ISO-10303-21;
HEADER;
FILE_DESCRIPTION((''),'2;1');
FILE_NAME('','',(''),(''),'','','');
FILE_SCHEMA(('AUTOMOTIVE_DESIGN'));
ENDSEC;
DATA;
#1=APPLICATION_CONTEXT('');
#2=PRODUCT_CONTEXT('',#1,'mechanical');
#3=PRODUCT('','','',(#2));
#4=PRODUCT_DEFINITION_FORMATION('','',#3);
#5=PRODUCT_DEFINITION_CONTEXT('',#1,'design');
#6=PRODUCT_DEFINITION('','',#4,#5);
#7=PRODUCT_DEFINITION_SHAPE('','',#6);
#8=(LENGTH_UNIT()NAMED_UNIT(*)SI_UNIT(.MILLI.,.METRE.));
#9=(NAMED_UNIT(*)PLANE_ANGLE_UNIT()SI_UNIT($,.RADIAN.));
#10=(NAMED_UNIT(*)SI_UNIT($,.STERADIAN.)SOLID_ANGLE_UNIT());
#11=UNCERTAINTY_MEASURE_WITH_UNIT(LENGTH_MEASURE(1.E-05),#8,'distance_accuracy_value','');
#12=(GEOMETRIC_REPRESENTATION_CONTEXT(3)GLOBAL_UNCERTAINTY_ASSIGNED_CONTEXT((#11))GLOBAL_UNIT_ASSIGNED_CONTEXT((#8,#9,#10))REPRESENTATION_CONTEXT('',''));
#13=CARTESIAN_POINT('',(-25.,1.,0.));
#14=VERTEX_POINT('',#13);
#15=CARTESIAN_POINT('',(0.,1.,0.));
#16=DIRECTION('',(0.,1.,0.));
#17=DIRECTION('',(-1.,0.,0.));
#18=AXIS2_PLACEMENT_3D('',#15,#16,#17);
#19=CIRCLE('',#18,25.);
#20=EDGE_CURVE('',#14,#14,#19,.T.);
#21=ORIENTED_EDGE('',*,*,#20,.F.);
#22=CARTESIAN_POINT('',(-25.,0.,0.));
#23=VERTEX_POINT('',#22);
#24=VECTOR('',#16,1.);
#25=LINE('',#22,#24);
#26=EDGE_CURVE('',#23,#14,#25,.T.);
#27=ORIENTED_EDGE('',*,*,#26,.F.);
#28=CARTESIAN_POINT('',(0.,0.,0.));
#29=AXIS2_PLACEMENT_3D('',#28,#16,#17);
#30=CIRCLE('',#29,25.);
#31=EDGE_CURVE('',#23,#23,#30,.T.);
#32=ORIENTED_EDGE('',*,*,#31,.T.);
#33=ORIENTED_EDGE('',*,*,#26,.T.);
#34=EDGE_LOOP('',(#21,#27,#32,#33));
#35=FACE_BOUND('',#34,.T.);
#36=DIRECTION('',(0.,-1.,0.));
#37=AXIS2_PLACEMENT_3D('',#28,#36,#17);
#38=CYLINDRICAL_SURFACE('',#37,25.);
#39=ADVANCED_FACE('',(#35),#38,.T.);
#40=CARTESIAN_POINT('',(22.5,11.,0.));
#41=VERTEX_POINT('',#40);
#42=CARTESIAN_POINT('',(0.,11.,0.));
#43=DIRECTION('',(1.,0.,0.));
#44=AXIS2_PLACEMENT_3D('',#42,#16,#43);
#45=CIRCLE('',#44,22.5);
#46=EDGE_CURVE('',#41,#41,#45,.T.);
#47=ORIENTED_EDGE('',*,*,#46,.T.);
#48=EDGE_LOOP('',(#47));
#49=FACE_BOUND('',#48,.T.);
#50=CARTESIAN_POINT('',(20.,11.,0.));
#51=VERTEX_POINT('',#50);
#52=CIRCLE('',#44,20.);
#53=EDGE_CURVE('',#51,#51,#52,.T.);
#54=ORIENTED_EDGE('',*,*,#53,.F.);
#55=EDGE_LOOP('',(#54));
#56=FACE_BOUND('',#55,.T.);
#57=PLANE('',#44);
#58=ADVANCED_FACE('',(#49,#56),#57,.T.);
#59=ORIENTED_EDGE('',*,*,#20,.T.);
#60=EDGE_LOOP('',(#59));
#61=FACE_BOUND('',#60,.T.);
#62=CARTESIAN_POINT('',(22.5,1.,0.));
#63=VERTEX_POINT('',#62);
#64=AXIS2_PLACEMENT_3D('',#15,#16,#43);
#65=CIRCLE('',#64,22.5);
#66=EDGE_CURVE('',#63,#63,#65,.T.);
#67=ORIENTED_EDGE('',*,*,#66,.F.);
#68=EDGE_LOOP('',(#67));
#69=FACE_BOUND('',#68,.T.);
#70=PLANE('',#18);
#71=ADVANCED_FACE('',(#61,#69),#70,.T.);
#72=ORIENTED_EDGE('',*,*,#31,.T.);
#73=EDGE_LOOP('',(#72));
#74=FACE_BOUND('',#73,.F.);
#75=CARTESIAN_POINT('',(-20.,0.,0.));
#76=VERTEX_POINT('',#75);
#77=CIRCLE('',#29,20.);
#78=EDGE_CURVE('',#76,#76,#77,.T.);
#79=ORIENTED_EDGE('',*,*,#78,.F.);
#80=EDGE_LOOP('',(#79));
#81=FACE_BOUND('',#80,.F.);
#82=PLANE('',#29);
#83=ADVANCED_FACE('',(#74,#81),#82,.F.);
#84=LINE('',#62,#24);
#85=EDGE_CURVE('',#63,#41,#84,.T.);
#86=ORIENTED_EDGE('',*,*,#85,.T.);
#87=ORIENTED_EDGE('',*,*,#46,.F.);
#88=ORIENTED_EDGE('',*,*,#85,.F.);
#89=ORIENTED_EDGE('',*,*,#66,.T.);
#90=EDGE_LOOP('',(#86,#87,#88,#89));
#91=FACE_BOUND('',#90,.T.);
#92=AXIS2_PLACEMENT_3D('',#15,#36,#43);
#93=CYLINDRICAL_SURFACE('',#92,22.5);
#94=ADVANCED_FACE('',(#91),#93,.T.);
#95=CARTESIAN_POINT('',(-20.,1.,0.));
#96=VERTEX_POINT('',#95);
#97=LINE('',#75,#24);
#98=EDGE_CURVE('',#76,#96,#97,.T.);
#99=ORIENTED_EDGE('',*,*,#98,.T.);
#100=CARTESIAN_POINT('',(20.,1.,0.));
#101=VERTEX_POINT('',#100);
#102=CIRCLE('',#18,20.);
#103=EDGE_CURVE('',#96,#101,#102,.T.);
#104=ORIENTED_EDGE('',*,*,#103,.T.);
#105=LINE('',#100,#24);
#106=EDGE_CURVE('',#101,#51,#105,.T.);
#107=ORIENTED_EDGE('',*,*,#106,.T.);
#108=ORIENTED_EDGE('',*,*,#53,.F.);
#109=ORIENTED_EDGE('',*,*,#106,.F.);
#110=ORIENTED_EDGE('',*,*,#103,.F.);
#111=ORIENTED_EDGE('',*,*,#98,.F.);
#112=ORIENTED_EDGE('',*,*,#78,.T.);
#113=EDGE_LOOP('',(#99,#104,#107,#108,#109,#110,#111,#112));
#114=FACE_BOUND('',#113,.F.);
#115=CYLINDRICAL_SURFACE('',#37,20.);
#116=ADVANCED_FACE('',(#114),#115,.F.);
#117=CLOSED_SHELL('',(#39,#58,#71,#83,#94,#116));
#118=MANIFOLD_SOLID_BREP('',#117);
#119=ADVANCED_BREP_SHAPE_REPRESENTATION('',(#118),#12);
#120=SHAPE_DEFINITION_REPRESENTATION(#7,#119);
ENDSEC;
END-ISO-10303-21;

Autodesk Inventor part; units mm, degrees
ref_plane "YZ Plane" through (0, 0, 0) normal (1, 0, 0) x (0, 1, 0)
ref_plane "XZ Plane" through (0, 0, 0) normal (0, 1, 0) x (-1, 0, 0)
ref_plane "XY Plane" through (0, 0, 0) normal (0, 0, 1) x (1, 0, 0)
sketch "Sketch1" plane through (0, 0, 0) normal (0, 1, 0) x (-1, 0, 0)
  circle A0 centre (0, 0) radius 25
  circle A1 centre (0, 0) radius 20
  dimension "d0" = 50
  dimension "d1" = 40
extrude "Extrusion1" add sketch "Sketch1" along normal blind 1
sketch "Sketch2" plane through (0, 1, 0) normal (0, 1, 0) x (1, 0, 0)
  circle A0 centre (0, 0) radius 22.5
  circle A1 centre (0, 0) radius 20
  dimension "d4" = 45
extrude "Extrusion2" add sketch "Sketch2" along normal blind 10
properties part number "gripper_ring_mount"
